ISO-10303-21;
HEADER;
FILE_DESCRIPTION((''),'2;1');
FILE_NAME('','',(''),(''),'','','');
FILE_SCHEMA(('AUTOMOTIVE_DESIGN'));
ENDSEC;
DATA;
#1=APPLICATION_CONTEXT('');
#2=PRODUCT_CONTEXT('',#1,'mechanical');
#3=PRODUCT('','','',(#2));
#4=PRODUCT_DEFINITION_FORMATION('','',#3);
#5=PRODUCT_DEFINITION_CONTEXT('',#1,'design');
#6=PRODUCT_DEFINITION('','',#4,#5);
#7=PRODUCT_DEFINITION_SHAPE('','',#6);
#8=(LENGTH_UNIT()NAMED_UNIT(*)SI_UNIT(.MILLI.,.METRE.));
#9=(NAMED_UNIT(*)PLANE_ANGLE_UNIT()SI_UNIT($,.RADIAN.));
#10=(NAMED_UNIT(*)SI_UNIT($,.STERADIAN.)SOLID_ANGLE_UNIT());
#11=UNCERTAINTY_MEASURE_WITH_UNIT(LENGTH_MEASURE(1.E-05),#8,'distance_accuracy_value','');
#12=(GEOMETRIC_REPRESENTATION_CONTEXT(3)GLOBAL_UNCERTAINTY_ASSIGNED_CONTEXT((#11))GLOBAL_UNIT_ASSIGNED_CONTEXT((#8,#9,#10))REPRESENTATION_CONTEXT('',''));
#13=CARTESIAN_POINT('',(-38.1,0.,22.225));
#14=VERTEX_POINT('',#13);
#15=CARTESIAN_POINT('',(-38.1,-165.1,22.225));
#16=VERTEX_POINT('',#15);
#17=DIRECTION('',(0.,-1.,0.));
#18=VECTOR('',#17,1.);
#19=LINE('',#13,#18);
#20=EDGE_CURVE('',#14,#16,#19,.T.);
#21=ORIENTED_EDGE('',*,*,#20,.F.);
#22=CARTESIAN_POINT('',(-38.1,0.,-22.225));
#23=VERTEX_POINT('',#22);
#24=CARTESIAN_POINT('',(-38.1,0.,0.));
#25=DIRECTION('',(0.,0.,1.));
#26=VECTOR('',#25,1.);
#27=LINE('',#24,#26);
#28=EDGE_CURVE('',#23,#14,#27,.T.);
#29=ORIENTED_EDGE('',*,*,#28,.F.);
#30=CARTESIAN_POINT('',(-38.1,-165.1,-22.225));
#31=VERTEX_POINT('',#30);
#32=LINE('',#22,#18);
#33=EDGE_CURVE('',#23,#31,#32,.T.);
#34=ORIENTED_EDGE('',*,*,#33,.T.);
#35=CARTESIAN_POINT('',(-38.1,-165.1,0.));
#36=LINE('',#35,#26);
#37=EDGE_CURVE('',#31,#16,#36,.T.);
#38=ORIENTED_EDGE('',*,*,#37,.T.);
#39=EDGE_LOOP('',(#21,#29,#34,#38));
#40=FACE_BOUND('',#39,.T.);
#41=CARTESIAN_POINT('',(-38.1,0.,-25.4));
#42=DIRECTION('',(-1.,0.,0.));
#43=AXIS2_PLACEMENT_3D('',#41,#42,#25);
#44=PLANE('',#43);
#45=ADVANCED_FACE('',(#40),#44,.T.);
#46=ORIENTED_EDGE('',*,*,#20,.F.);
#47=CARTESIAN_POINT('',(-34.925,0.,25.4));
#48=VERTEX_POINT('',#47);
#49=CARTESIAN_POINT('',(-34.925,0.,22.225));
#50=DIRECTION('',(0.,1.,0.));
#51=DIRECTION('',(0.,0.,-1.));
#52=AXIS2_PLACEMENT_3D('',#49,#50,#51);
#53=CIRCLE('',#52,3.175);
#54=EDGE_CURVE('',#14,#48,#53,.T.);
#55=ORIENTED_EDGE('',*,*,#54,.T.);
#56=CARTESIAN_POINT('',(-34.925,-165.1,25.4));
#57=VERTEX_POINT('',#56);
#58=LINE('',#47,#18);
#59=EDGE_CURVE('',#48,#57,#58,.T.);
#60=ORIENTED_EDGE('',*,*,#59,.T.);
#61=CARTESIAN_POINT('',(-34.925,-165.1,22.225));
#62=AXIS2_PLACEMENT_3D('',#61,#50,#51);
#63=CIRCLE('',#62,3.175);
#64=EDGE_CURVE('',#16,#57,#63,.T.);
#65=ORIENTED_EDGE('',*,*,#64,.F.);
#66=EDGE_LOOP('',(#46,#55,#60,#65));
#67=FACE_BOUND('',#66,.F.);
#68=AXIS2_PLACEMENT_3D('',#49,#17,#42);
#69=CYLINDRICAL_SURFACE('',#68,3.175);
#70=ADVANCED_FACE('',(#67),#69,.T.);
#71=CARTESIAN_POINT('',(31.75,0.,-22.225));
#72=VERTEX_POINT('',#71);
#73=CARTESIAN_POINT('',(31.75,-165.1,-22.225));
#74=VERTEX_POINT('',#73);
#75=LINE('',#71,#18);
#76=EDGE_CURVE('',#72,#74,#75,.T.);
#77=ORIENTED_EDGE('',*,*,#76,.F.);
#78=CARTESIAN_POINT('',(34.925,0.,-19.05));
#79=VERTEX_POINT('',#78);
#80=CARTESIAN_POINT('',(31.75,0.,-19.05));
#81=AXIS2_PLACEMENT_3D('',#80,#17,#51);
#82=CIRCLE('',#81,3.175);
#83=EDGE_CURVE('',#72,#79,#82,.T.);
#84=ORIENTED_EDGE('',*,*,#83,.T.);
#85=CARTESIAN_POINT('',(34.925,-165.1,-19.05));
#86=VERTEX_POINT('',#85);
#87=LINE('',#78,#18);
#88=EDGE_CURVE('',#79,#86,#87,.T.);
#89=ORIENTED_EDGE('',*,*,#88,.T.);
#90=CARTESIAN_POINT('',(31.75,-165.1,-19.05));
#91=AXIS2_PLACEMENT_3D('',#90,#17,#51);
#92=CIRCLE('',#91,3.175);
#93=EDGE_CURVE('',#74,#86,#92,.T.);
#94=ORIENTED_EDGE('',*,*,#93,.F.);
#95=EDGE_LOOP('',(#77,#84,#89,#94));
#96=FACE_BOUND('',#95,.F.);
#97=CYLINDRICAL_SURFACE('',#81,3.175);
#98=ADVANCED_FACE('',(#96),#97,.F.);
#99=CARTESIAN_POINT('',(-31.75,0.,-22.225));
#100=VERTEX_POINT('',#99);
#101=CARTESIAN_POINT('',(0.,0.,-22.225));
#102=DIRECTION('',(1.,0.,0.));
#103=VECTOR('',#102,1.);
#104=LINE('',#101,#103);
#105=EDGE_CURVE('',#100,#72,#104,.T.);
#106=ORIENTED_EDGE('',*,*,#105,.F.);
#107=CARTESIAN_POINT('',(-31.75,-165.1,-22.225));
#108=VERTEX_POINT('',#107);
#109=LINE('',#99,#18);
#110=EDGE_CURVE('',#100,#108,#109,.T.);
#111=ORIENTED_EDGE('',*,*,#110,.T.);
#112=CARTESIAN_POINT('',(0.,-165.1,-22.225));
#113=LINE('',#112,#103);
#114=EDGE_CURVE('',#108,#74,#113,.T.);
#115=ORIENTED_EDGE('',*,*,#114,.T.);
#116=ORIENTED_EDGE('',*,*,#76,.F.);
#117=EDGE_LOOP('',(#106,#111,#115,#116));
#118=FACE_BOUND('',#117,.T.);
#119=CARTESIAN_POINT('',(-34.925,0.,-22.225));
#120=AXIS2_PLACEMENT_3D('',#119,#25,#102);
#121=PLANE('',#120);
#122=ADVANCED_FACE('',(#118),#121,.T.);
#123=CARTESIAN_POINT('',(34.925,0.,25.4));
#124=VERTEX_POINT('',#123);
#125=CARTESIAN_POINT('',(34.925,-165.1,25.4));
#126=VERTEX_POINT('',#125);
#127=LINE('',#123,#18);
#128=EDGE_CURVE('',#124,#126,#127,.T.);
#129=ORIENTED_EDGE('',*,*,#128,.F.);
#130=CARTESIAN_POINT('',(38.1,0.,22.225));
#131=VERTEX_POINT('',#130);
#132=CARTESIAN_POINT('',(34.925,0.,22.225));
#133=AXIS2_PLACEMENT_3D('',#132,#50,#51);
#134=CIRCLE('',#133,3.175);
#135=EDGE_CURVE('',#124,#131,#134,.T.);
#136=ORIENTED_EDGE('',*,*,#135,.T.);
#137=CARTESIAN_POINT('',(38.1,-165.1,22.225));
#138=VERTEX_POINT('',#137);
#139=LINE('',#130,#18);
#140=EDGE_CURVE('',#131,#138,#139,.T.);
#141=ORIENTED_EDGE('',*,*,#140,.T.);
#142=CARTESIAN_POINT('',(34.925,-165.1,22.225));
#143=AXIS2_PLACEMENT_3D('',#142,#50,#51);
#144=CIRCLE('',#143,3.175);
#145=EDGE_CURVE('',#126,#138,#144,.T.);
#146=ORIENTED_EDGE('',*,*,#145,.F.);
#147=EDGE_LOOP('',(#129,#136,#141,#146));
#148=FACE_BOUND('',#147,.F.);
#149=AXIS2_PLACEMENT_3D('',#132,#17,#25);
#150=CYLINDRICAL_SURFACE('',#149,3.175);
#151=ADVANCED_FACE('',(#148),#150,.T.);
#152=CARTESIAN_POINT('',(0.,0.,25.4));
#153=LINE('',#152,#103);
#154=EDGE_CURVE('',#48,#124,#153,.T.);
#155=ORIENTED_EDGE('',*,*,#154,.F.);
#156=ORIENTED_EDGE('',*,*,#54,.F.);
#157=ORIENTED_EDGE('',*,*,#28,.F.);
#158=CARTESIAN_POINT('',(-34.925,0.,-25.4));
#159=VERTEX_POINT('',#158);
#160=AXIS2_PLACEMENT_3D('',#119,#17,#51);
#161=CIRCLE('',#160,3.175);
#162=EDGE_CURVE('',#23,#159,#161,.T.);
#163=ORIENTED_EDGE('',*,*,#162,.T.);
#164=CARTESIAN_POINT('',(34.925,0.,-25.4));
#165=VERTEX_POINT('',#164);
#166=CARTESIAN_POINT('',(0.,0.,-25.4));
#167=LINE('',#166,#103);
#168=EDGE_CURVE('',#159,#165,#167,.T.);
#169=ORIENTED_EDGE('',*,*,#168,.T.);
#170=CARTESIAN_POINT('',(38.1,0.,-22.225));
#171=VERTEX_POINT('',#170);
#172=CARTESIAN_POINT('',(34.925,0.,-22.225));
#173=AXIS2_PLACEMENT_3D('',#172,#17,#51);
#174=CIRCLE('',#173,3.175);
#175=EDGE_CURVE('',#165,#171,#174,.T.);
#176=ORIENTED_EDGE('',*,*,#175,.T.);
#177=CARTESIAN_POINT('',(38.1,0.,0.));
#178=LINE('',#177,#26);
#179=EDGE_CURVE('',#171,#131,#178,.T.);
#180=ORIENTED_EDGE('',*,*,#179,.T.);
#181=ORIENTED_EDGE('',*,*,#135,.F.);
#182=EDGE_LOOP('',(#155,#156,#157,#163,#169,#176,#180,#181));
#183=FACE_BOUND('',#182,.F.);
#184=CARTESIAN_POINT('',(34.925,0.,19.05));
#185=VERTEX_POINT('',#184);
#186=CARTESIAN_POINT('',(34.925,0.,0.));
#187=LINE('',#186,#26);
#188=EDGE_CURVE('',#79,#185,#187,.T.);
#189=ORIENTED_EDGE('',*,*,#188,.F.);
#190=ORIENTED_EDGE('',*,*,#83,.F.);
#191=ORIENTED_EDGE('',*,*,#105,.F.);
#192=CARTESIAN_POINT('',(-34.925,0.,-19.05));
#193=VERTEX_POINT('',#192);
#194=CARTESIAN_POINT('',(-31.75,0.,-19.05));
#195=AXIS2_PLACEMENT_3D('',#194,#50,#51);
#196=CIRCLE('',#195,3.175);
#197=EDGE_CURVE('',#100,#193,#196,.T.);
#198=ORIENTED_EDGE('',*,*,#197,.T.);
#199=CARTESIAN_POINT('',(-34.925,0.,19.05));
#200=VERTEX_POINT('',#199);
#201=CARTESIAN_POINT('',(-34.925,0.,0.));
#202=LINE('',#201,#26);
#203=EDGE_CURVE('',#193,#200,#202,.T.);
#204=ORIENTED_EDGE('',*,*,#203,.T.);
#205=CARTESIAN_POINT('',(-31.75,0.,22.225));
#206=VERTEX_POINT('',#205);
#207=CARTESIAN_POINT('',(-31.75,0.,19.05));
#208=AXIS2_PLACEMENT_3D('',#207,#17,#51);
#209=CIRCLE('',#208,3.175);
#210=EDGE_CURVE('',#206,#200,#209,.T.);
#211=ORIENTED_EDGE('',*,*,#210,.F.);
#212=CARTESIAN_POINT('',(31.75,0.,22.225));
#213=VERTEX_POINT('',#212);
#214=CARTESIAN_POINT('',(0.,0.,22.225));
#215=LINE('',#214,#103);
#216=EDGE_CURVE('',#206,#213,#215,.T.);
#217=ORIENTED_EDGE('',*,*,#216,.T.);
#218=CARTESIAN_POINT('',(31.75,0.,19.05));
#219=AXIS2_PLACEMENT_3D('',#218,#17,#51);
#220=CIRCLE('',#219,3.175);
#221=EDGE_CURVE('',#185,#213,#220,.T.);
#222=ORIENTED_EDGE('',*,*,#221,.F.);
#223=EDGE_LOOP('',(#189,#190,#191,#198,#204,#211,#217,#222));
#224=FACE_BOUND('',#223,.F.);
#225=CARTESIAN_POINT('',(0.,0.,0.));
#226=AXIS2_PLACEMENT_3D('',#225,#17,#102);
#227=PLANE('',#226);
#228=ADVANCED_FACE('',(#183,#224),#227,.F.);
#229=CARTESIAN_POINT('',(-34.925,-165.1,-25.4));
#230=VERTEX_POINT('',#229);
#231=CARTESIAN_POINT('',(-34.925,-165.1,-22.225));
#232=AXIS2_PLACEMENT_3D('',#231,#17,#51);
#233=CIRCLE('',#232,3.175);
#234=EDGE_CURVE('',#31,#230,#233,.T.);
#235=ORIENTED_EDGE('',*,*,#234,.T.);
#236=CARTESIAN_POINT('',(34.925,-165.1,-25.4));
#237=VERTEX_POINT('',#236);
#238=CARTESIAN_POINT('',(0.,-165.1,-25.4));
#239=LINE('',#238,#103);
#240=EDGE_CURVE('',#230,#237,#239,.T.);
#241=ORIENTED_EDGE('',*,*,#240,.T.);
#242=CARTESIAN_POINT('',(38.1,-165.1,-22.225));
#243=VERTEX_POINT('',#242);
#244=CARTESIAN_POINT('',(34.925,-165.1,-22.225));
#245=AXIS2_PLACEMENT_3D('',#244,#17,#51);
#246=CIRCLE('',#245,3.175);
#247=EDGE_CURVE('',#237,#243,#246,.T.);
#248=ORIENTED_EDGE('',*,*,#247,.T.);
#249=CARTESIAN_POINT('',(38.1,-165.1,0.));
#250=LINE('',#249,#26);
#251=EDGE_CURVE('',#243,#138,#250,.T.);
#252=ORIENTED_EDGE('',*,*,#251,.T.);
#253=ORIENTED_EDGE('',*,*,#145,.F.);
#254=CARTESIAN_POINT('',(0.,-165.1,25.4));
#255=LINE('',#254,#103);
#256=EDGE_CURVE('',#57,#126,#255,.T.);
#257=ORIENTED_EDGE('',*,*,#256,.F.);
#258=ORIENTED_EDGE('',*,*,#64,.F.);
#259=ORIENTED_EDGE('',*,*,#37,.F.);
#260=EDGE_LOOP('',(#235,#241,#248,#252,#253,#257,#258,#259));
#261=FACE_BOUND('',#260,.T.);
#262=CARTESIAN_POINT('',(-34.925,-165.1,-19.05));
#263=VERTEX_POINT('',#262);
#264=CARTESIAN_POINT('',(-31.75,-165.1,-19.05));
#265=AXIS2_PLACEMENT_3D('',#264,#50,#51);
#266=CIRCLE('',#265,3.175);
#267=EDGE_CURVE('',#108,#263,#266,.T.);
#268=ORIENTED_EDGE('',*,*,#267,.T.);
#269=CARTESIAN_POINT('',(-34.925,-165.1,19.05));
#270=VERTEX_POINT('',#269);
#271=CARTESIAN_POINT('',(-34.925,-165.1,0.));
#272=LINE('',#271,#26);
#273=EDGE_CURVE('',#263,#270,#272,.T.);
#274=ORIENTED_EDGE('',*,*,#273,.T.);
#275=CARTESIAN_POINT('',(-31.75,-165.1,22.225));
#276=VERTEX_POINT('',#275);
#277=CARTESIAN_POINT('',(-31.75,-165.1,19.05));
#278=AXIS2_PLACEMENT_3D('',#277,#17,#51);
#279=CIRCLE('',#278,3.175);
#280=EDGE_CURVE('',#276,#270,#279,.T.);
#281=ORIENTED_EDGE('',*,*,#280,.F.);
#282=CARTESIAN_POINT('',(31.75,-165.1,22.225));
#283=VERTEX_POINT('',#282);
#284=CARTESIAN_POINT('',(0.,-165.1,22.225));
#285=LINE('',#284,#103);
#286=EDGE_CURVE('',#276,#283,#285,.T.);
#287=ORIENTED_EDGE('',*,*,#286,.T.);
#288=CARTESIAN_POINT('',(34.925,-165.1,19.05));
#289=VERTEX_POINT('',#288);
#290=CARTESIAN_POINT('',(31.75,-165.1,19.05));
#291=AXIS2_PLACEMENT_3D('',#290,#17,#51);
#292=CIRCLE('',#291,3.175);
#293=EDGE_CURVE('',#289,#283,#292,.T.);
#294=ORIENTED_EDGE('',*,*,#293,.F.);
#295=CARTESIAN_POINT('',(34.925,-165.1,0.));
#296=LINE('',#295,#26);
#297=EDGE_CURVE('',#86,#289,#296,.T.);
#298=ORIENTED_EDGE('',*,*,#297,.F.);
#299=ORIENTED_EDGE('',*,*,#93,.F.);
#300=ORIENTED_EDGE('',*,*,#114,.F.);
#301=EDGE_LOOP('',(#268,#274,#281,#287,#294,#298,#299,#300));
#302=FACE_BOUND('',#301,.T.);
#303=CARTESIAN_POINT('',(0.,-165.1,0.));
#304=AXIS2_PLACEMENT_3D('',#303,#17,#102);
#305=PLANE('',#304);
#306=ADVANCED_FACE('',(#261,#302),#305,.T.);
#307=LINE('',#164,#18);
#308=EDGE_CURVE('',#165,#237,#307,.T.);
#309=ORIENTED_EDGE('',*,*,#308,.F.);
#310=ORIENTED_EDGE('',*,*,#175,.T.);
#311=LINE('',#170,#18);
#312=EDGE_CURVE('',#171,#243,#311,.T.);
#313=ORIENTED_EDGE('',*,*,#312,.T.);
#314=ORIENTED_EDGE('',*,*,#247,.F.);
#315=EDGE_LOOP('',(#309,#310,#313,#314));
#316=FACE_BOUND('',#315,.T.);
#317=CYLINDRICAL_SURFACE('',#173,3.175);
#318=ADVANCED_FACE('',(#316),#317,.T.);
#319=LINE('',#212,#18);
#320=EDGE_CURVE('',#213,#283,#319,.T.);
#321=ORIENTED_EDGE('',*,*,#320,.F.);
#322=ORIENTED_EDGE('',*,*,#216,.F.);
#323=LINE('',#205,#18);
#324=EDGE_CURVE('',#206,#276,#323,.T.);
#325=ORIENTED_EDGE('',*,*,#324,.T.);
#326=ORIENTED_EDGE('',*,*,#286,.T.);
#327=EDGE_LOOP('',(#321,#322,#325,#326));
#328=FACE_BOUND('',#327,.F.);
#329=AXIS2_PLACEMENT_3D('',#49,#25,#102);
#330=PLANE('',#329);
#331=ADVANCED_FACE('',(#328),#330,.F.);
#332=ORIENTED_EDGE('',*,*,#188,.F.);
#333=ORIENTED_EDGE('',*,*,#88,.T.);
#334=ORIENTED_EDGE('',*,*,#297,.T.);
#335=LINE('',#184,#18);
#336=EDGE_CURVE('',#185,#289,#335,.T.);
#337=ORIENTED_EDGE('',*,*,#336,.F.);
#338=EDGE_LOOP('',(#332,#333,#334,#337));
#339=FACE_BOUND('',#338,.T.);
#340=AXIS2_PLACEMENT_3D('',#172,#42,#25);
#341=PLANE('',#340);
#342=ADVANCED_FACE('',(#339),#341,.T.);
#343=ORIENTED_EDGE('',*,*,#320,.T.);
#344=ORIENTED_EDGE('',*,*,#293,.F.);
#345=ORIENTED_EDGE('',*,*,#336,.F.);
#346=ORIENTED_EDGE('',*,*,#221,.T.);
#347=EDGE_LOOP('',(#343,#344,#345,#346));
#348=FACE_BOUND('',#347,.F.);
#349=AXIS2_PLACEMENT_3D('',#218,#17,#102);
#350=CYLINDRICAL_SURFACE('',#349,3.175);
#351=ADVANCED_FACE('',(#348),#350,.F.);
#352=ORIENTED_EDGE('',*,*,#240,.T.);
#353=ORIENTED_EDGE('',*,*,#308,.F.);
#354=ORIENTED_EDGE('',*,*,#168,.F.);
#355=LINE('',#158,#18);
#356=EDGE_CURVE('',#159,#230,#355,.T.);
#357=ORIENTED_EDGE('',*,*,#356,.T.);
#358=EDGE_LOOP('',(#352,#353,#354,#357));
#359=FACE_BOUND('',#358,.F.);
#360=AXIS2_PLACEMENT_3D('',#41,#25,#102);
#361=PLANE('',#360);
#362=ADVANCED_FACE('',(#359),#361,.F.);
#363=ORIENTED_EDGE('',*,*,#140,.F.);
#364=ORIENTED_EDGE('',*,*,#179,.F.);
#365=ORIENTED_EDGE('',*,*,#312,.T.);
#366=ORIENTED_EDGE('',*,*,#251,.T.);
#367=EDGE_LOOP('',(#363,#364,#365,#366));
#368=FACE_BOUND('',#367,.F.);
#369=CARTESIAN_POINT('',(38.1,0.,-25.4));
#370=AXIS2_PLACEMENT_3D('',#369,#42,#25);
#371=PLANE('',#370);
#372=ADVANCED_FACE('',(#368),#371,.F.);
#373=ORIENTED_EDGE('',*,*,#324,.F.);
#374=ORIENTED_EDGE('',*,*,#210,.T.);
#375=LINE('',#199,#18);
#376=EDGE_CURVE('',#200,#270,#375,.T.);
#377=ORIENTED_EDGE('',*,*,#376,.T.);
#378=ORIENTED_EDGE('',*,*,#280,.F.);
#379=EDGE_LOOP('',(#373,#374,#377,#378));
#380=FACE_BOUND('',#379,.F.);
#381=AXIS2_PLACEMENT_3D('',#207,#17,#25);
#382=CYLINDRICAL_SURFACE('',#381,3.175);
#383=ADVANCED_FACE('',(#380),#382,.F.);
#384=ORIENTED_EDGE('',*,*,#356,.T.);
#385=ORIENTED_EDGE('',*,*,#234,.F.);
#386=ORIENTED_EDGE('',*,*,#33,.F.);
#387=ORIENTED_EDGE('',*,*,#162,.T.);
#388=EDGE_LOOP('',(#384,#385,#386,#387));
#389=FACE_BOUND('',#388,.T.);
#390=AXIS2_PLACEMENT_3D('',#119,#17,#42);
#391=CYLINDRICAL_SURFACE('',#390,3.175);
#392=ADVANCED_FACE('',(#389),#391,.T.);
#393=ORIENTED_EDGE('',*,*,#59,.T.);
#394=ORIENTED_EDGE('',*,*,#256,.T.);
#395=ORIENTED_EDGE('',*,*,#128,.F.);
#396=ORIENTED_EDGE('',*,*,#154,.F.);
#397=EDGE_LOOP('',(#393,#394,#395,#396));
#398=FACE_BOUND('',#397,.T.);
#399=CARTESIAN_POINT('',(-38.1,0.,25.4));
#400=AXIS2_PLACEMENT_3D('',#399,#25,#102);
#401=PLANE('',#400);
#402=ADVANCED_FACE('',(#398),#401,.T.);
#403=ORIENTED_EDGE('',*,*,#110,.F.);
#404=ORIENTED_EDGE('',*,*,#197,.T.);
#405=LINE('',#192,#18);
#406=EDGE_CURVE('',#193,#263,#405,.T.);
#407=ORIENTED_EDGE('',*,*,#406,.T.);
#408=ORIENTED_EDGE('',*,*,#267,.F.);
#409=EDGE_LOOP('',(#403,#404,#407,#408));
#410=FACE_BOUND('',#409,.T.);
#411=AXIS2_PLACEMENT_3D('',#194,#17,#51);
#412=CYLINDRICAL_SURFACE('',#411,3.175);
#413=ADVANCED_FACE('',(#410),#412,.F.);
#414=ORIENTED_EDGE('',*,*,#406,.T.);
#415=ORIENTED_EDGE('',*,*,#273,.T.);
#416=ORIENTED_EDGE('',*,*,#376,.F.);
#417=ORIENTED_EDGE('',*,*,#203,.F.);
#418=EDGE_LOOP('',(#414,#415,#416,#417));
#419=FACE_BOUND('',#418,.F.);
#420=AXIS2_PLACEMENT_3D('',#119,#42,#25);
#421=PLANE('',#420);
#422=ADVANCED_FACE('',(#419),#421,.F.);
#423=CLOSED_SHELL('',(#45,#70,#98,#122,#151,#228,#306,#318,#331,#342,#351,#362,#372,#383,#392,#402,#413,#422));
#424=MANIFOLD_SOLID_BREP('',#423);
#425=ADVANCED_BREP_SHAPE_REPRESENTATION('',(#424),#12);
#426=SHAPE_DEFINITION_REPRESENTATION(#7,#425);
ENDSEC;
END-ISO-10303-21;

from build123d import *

# Parameters (mm, degrees)
F0_W     = 76.2
F0_H     = 50.8
F0_W_2   = 69.85
F0_H_2   = 44.45
F2_DEPTH = 165.1
F3_R     = 3.175


# Not quite as in the source:
# - a variable given as a bare number and used for a length is read in inches; the dataset says mm whatever the document's units were


with BuildPart() as f2:
    # F0 (on Front) → F2 (new body)
    with BuildSketch(Plane.XZ):
        Rectangle(F0_W, F0_H)
        Rectangle(F0_W_2, F0_H_2, mode=Mode.SUBTRACT)
    extrude(amount=F2_DEPTH)

    # F3
    f3_edges = [f2.edges().sort_by_distance(p)[0] for p in [
        (-34.925, -82.55, 22.225),
        (34.925, -82.55, 22.225),
        (34.925, -82.55, -22.225),
        (-34.925, -82.55, -22.225),
        (38.1, -82.55, 25.4),
        (38.1, -82.55, -25.4),
        (-38.1, -82.55, -25.4),
        (-38.1, -82.55, 25.4),
    ]]
    fillet(f3_edges, radius=F3_R)


solid = f2.part
